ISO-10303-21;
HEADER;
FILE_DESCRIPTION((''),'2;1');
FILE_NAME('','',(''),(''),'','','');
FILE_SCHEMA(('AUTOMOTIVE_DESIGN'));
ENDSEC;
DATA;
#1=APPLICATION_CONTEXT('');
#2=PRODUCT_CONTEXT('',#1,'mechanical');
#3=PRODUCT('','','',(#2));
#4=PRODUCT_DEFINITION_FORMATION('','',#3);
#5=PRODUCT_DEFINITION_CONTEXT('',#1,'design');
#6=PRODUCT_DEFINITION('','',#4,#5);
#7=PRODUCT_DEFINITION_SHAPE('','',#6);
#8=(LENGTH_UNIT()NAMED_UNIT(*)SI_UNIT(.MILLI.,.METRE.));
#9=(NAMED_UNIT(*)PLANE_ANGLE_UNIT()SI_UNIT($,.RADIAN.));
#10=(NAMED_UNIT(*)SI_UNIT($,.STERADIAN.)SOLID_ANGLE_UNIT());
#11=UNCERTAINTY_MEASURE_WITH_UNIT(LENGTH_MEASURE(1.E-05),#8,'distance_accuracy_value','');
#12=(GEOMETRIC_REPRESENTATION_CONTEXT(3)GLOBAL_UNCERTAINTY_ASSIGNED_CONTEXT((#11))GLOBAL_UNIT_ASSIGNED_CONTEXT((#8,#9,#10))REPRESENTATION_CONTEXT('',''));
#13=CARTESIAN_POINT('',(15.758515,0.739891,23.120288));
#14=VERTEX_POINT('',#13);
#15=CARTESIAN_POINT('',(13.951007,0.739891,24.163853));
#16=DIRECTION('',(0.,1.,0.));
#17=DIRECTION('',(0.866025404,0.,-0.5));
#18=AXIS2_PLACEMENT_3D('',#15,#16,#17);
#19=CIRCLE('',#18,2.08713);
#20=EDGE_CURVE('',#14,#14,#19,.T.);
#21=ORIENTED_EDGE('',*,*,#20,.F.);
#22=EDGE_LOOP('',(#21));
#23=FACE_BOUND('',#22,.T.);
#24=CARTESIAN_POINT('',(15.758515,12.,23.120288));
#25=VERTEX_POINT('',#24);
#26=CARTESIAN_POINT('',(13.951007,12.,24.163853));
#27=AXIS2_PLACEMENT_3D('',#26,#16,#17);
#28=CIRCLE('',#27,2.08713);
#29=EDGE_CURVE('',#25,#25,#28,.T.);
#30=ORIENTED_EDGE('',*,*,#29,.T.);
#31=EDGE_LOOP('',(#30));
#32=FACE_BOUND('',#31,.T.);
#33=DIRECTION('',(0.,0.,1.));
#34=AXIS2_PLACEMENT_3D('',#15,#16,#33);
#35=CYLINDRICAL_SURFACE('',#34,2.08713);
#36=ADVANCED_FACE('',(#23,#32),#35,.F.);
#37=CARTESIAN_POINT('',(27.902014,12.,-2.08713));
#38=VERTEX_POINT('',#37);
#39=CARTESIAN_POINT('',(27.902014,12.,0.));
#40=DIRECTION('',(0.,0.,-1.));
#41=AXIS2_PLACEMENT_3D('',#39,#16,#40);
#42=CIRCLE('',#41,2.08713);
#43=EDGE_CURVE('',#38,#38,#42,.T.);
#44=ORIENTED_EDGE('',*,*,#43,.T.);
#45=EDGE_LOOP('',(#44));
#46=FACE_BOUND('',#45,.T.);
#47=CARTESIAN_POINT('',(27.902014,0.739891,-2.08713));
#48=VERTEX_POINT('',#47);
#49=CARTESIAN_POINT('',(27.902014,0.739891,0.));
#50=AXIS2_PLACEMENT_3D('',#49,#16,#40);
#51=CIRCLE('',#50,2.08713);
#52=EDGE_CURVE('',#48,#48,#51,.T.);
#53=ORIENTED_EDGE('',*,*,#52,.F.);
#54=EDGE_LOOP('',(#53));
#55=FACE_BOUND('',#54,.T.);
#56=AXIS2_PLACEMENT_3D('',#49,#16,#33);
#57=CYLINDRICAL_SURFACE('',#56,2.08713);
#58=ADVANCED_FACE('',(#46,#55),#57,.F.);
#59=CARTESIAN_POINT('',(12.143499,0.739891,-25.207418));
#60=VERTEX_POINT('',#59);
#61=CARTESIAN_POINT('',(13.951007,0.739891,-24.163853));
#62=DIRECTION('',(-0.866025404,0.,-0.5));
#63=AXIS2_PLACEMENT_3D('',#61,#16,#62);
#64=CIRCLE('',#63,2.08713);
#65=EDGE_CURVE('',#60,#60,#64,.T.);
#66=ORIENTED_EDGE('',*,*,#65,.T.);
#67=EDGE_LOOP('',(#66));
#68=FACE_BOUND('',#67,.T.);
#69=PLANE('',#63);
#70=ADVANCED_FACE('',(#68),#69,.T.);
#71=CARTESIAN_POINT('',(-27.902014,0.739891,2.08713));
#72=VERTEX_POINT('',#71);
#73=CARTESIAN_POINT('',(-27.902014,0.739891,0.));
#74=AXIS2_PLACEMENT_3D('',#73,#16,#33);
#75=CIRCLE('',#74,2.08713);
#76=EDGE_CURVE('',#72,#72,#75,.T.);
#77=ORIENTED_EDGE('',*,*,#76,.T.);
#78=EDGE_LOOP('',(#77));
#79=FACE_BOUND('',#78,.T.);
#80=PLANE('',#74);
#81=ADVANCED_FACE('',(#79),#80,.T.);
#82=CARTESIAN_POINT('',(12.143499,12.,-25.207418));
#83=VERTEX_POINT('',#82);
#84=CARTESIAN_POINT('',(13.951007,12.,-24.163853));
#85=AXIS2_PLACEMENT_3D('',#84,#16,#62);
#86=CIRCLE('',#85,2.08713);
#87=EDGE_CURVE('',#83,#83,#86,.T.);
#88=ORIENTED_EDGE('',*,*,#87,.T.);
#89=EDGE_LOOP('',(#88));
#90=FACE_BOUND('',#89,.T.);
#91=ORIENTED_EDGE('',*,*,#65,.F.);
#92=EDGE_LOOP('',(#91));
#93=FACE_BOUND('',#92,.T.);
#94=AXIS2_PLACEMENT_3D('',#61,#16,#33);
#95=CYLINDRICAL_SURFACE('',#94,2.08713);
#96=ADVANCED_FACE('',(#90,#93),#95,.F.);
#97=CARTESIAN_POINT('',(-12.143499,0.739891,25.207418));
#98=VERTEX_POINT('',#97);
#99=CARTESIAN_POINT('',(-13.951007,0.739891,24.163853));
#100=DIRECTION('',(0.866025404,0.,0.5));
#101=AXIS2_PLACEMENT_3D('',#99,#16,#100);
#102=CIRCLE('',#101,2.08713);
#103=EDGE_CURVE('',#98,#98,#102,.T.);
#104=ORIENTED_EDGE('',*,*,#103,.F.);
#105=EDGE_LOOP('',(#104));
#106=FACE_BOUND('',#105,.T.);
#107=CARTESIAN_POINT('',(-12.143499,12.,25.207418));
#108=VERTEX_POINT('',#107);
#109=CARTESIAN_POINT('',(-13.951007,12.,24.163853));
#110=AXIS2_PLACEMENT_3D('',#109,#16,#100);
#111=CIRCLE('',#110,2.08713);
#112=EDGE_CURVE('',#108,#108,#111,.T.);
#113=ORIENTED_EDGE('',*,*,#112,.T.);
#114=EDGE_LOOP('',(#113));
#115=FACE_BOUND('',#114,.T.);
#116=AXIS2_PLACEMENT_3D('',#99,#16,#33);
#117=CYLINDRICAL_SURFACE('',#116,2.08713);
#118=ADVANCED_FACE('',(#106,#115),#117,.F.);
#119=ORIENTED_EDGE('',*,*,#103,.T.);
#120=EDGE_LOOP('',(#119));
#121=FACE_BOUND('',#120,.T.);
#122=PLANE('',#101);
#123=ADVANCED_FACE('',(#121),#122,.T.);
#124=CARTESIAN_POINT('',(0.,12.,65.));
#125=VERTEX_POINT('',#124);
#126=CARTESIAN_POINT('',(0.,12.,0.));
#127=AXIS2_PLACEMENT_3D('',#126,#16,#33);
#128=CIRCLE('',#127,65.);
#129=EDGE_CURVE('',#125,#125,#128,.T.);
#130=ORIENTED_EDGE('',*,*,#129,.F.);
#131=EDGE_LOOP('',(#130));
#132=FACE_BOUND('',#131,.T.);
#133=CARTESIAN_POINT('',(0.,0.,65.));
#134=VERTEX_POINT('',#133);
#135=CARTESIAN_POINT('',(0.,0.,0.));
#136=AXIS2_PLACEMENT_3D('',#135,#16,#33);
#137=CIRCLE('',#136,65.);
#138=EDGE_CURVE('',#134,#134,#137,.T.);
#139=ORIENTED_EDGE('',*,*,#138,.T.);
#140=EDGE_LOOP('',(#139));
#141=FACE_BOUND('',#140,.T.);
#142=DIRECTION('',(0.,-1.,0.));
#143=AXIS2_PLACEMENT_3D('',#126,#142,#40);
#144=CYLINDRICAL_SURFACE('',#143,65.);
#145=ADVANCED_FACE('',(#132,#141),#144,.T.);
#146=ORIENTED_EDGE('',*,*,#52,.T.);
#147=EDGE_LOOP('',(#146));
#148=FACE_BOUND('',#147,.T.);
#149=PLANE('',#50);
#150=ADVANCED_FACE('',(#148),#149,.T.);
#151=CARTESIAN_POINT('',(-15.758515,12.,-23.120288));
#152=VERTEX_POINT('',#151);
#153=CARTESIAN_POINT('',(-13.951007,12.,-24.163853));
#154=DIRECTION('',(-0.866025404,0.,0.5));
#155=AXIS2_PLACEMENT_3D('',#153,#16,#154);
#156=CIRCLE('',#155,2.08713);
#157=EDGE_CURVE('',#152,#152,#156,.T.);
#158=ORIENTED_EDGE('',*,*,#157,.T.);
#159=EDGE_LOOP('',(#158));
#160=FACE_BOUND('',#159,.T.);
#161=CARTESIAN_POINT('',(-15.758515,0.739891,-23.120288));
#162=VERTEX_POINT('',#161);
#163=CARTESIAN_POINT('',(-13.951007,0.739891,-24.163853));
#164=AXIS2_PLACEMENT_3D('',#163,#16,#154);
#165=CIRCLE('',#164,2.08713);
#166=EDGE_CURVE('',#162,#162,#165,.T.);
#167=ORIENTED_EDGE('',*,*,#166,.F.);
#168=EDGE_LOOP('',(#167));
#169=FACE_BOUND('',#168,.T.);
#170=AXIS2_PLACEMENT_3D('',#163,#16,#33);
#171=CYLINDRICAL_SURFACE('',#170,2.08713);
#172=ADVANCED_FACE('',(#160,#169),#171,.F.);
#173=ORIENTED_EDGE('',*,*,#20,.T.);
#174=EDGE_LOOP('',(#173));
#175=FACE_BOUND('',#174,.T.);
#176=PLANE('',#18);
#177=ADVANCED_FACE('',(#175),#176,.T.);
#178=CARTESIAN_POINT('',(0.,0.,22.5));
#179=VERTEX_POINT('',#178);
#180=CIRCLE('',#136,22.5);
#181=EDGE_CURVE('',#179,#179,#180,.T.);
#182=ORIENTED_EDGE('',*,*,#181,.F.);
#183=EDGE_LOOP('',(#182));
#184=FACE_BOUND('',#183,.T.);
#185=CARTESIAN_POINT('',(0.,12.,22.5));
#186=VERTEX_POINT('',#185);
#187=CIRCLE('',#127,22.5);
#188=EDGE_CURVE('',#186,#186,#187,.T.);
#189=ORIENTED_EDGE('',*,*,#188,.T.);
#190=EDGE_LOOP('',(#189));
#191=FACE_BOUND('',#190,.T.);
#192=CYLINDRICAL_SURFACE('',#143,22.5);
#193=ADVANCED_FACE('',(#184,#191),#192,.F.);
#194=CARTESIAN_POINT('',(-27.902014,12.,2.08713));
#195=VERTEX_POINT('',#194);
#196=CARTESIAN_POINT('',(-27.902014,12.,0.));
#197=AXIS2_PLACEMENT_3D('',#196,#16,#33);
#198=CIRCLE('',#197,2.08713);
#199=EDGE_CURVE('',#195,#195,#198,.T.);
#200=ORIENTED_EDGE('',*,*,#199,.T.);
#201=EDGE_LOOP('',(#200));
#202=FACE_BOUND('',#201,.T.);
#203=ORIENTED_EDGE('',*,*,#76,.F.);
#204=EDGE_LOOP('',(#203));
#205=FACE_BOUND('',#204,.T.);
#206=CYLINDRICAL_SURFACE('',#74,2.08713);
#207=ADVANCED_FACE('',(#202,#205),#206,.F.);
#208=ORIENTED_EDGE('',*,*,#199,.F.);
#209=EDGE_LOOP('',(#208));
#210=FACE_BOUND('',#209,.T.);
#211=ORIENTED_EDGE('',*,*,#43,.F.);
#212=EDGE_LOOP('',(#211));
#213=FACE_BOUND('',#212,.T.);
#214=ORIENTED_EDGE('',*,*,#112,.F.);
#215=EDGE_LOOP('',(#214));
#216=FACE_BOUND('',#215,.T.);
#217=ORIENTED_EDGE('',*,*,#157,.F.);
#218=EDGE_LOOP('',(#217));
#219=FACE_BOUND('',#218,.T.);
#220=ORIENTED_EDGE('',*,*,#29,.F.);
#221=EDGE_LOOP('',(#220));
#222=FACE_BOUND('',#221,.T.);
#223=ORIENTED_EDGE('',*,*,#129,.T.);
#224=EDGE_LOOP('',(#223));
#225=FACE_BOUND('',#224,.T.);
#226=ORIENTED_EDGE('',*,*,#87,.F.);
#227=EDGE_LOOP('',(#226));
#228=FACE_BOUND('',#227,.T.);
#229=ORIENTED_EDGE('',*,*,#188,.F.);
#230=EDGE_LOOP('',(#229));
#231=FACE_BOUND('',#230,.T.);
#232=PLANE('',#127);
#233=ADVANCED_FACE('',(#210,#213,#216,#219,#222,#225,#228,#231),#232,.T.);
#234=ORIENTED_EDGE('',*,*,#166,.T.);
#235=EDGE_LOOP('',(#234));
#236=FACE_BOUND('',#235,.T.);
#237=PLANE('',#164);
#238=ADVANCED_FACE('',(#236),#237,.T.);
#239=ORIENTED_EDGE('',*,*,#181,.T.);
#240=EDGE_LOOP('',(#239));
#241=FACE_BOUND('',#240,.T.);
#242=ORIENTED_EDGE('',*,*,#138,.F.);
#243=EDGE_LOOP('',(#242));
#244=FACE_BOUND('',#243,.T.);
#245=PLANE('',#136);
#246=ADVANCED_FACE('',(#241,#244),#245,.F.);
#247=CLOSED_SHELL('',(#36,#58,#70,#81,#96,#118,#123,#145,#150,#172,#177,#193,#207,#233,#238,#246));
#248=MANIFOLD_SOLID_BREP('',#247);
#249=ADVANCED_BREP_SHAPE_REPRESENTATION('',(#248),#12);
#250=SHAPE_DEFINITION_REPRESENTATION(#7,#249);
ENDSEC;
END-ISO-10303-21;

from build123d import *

# Parameters (mm, degrees)
SKETCH1_R           = 65
BOSS_EXTRUDE1_DEPTH = 12
SKETCH2_R           = 22.5
CUT_EXTRUDE1_DEPTH  = 93.703829479
SKETCH3_R           = 2.087130351
CUT_EXTRUDE2_DEPTH  = 11.260109142
CIRPATTERN1_COUNT   = 6


with BuildPart() as part:
    # Sketch1 → Boss-Extrude1 (new body)
    with BuildSketch(Plane(origin=(0, 0, 0), x_dir=(1, 0, 0), z_dir=(0, 1, 0))):
        Circle(SKETCH1_R)
    extrude(amount=BOSS_EXTRUDE1_DEPTH)

    # Sketch2 → Cut-Extrude1 (cut, through all)
    with BuildSketch(Plane(origin=(0, 0, 0), x_dir=(1, 0, 0), z_dir=(0, 1, 0))):
        Circle(SKETCH2_R)
    extrude(amount=CUT_EXTRUDE1_DEPTH, mode=Mode.SUBTRACT)

    # Sketch3 → Cut-Extrude2 (cut)
    with BuildSketch(Plane(origin=(0, 12, 0), x_dir=(1, 0, 0), z_dir=(0, 1, 0))):
        with Locations((-27.902014054, 0)):
            Circle(SKETCH3_R)
    cut_extrude2 = extrude(amount=-CUT_EXTRUDE2_DEPTH, mode=Mode.SUBTRACT)

    # CirPattern1: Cut-Extrude2 ×6 about axis
    cirpattern1_axis = Axis((0, 0, 0), (0, 1, 0))
    for i in range(1, CIRPATTERN1_COUNT):
        add(cut_extrude2.rotate(cirpattern1_axis, i * 360 / CIRPATTERN1_COUNT), mode=Mode.SUBTRACT)


solid = part.part
